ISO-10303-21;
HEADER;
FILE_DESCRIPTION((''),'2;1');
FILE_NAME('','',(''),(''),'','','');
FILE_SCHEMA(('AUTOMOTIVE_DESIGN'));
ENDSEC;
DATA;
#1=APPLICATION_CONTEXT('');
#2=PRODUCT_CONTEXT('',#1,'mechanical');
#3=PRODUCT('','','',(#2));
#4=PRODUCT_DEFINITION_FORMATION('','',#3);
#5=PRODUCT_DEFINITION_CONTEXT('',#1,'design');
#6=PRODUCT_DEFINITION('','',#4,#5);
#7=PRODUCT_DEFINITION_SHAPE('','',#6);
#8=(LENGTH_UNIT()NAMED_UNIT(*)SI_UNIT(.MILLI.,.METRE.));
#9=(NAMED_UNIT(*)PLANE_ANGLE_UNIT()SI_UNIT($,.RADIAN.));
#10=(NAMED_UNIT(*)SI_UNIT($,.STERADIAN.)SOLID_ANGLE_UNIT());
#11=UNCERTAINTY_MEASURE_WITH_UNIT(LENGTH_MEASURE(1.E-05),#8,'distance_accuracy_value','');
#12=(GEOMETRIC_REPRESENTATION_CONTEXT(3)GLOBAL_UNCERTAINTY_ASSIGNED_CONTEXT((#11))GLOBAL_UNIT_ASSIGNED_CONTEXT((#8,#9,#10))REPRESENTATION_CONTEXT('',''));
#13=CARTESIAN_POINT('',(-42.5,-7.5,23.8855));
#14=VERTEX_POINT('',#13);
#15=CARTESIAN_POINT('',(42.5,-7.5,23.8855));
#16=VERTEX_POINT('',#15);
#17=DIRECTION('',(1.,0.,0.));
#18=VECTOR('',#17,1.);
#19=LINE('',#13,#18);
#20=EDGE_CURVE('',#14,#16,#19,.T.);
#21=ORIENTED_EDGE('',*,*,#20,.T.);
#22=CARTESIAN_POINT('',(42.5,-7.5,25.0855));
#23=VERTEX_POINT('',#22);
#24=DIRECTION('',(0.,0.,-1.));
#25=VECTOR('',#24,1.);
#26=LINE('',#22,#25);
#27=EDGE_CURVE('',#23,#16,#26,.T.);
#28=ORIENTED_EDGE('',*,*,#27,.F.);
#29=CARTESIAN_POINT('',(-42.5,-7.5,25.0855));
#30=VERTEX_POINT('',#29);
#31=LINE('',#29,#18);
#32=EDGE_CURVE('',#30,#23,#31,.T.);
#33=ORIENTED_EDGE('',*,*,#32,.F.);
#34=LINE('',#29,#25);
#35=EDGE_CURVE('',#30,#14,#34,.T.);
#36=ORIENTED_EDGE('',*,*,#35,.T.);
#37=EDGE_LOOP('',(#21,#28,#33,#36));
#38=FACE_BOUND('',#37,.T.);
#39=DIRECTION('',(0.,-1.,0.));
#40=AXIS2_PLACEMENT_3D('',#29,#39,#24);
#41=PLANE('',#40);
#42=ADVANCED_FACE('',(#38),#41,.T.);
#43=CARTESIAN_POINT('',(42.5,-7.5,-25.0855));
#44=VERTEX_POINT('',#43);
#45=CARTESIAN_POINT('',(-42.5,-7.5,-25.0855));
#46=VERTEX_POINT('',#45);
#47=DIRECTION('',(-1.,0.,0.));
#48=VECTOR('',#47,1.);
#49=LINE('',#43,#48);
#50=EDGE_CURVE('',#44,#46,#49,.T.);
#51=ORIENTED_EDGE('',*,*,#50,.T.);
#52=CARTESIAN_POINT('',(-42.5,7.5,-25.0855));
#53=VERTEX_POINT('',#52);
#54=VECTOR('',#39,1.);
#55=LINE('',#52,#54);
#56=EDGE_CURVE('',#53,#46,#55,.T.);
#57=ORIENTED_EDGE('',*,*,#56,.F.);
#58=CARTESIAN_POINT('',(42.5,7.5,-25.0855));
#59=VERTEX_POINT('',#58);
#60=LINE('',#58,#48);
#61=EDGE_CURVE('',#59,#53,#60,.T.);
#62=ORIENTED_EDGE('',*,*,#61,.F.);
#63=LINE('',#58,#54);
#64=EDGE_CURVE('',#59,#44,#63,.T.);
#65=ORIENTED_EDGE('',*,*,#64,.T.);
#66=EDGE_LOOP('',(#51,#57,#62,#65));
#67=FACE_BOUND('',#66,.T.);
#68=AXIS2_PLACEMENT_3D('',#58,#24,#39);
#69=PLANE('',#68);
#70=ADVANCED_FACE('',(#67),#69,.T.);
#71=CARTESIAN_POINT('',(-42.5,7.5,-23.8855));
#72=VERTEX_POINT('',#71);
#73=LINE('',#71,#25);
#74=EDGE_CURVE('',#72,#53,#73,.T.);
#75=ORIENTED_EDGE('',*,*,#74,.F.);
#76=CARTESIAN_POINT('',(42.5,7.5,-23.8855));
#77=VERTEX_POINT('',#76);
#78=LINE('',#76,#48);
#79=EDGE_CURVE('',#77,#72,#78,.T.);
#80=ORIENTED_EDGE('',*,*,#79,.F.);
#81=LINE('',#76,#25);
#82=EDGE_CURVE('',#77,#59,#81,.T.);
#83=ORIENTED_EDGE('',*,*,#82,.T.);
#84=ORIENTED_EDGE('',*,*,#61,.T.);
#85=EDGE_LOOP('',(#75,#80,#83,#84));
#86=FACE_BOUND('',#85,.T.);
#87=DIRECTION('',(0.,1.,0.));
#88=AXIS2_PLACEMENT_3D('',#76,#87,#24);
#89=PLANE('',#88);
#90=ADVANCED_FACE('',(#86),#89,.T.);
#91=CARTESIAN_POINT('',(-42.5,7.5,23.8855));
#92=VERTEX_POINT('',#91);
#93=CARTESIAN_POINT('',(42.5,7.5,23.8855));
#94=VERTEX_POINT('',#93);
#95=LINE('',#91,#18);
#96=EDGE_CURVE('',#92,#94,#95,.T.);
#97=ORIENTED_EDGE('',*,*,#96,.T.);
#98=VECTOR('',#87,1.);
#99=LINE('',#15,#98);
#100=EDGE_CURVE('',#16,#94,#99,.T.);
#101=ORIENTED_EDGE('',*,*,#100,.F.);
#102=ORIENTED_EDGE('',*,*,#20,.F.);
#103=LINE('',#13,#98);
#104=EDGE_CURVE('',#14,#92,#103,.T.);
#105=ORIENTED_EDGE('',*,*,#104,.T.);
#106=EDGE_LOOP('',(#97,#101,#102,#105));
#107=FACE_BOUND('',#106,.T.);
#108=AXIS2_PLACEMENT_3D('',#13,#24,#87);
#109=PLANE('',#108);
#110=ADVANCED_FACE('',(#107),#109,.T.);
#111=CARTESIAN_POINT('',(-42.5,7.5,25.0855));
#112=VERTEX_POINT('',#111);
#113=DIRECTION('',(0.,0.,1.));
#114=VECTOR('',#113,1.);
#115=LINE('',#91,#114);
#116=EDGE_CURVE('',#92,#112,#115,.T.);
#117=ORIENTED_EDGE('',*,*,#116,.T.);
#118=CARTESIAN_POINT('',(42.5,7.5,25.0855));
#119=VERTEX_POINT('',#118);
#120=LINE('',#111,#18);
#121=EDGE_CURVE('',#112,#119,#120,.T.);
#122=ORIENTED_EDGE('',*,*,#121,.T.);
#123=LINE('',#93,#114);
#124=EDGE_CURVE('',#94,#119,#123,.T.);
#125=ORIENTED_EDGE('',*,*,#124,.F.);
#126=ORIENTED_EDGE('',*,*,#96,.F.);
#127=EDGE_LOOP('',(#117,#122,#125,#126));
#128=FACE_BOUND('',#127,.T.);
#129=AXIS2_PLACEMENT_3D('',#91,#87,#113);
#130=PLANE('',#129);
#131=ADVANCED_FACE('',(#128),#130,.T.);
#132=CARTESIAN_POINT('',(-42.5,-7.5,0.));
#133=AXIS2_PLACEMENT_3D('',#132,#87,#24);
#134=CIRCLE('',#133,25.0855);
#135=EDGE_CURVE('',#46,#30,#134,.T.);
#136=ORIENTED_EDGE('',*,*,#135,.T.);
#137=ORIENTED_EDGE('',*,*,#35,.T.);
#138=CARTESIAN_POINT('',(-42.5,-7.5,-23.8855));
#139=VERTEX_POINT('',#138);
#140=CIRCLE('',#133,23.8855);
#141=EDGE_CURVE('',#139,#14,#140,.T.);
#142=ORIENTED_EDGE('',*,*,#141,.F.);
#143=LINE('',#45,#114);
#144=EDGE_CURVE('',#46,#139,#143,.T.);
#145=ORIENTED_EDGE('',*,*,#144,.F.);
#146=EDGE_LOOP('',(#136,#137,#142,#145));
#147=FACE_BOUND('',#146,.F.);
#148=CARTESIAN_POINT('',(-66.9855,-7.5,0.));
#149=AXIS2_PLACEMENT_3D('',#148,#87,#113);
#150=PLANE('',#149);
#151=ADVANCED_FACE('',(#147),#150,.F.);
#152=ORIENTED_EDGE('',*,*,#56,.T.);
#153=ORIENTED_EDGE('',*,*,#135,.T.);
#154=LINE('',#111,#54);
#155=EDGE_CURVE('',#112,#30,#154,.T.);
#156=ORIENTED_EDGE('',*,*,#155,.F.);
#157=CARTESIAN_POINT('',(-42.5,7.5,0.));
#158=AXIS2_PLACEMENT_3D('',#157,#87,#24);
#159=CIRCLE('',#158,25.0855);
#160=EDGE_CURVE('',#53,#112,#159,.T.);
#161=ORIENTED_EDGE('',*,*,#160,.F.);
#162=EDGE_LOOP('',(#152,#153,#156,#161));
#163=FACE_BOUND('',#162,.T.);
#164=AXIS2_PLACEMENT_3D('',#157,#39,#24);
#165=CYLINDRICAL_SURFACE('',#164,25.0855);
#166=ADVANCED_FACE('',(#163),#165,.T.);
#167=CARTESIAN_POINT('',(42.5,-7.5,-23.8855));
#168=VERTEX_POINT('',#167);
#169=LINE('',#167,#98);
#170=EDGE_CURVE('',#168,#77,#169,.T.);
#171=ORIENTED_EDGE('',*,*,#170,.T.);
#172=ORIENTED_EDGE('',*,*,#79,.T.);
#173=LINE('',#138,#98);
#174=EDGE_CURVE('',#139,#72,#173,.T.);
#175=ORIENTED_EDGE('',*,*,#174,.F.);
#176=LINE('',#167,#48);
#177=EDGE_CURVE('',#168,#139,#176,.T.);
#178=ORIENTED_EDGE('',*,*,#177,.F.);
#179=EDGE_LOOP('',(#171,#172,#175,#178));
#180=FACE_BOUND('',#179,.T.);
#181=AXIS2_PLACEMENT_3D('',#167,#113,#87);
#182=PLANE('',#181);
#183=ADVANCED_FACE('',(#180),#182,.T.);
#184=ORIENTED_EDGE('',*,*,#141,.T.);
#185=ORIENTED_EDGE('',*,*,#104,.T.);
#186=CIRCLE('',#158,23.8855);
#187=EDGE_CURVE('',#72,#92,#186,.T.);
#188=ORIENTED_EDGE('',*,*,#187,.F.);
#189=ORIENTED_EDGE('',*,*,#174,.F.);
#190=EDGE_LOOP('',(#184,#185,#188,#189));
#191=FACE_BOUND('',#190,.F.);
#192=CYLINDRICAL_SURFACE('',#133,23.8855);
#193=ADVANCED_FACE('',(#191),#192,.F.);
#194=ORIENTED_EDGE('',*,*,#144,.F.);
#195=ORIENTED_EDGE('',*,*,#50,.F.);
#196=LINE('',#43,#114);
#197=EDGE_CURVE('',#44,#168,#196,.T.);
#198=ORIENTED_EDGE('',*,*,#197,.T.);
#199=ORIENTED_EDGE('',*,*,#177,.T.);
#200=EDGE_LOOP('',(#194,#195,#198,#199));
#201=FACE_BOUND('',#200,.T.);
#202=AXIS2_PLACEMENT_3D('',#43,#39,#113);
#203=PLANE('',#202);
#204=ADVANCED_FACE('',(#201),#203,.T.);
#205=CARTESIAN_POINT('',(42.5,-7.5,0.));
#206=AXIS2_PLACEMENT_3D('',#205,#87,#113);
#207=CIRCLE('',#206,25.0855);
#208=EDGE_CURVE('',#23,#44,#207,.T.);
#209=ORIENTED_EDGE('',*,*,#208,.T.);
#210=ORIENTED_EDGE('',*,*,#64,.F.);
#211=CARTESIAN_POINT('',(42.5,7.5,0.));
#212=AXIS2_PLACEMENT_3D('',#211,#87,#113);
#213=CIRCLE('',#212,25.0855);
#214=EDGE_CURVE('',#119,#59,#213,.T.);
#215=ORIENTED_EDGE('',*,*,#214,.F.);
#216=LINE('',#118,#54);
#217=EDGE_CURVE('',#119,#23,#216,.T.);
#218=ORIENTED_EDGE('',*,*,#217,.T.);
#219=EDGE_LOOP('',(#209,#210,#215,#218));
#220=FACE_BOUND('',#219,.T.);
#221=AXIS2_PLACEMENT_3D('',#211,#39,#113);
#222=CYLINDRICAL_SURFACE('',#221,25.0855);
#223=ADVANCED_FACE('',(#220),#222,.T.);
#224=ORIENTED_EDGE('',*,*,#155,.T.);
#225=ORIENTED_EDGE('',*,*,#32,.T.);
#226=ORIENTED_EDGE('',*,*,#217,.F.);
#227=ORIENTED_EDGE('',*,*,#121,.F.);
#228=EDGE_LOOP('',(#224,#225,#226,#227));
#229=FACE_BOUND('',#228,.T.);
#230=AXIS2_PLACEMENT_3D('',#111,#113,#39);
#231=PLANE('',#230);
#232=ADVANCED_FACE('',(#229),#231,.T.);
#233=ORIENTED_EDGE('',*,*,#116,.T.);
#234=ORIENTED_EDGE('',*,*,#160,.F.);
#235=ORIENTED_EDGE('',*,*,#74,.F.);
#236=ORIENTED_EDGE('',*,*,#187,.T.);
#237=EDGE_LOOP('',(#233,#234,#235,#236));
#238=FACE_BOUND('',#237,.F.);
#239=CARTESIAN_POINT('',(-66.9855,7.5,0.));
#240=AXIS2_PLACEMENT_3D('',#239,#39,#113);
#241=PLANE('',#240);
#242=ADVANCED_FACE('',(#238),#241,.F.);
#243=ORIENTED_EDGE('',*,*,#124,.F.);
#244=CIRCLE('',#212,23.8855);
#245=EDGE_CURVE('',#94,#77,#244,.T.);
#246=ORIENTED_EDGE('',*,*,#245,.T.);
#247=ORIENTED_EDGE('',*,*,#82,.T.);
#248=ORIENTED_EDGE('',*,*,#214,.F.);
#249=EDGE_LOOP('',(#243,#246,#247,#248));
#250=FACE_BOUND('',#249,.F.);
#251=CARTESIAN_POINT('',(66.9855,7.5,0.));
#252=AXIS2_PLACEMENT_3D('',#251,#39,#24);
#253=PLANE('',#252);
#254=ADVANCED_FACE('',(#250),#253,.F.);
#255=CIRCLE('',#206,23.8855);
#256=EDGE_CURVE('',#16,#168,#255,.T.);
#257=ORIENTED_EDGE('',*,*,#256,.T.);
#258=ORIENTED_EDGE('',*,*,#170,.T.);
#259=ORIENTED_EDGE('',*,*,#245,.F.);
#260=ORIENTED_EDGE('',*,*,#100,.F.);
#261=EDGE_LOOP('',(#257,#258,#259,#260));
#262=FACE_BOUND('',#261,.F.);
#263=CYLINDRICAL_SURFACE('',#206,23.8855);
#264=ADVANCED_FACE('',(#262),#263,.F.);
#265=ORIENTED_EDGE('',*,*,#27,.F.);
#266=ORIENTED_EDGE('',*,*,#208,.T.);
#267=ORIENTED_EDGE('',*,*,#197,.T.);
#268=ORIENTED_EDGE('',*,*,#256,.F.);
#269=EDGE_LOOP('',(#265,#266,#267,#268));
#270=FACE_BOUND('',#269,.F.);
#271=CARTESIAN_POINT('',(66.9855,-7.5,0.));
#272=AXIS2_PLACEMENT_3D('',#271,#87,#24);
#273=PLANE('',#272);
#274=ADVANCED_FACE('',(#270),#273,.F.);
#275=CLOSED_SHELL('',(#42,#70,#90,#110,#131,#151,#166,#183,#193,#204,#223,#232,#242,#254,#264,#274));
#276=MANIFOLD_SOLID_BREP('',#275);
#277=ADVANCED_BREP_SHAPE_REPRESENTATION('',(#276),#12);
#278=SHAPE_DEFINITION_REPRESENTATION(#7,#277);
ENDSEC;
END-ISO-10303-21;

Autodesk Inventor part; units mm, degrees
ref_plane "YZ Plane" through (0, 0, 0) normal (1, 0, 0) x (0, 1, 0)
ref_plane "XZ Plane" through (0, 0, 0) normal (0, 1, 0) x (-1, 0, 0)
sketch "Sketch1" plane through (0, 0, 0) normal (0, 1, 0) x (-1, 0, 0)
  line L0 (42.5, 0) -> (-42.5, 0) construction
  line L1 (42.5, 23.8855) -> (-42.5, 23.8855)
  line L2 (-42.5, -23.8855) -> (42.5, -23.8855)
  arc A0 (42.5, -23.8855) -> (42.5, 23.8855) centre (42.5, 0) ccw
  arc A1 (-42.5, 23.8855) -> (-42.5, -23.8855) centre (-42.5, 0) ccw
  point P0 (0, 0)
  point P1 (0, 0)
  dimension "d0" = 85
  dimension "d1" = 47.771
ref_plane "Work Plane1" through (-42.5, 0, -23.8855) normal (-1, 0, 0) x (0, -1, 0)
sketch "Sketch2" plane through (-42.5, 0, -23.8855) normal (-1, 0, 0) x (0, -1, 0)
  line L0 (7.5, 0) -> (-7.5, 0)
  line L1 (-7.5, 0) -> (-7.5, -1.2)
  line L2 (-7.5, -1.2) -> (7.5, -1.2)
  line L3 (7.5, -1.2) -> (7.5, 0)
  line L4 (7.5, 0) -> (-7.5, -1.2) construction
  line L5 (-7.5, 0) -> (7.5, -1.2) construction
  point P0 (0, 23.8855)
  point P1 (0, -0.6)
  point P2 (0, 0)
  dimension "d2" = 15
  dimension "d3" = 1.2
sweep "Sweep1" add profiles "Sketch2" path "Sketch1"
properties part number "2309HCMUTE-CDT23-BELT_S5M-320X64X15" material "Rubber"
